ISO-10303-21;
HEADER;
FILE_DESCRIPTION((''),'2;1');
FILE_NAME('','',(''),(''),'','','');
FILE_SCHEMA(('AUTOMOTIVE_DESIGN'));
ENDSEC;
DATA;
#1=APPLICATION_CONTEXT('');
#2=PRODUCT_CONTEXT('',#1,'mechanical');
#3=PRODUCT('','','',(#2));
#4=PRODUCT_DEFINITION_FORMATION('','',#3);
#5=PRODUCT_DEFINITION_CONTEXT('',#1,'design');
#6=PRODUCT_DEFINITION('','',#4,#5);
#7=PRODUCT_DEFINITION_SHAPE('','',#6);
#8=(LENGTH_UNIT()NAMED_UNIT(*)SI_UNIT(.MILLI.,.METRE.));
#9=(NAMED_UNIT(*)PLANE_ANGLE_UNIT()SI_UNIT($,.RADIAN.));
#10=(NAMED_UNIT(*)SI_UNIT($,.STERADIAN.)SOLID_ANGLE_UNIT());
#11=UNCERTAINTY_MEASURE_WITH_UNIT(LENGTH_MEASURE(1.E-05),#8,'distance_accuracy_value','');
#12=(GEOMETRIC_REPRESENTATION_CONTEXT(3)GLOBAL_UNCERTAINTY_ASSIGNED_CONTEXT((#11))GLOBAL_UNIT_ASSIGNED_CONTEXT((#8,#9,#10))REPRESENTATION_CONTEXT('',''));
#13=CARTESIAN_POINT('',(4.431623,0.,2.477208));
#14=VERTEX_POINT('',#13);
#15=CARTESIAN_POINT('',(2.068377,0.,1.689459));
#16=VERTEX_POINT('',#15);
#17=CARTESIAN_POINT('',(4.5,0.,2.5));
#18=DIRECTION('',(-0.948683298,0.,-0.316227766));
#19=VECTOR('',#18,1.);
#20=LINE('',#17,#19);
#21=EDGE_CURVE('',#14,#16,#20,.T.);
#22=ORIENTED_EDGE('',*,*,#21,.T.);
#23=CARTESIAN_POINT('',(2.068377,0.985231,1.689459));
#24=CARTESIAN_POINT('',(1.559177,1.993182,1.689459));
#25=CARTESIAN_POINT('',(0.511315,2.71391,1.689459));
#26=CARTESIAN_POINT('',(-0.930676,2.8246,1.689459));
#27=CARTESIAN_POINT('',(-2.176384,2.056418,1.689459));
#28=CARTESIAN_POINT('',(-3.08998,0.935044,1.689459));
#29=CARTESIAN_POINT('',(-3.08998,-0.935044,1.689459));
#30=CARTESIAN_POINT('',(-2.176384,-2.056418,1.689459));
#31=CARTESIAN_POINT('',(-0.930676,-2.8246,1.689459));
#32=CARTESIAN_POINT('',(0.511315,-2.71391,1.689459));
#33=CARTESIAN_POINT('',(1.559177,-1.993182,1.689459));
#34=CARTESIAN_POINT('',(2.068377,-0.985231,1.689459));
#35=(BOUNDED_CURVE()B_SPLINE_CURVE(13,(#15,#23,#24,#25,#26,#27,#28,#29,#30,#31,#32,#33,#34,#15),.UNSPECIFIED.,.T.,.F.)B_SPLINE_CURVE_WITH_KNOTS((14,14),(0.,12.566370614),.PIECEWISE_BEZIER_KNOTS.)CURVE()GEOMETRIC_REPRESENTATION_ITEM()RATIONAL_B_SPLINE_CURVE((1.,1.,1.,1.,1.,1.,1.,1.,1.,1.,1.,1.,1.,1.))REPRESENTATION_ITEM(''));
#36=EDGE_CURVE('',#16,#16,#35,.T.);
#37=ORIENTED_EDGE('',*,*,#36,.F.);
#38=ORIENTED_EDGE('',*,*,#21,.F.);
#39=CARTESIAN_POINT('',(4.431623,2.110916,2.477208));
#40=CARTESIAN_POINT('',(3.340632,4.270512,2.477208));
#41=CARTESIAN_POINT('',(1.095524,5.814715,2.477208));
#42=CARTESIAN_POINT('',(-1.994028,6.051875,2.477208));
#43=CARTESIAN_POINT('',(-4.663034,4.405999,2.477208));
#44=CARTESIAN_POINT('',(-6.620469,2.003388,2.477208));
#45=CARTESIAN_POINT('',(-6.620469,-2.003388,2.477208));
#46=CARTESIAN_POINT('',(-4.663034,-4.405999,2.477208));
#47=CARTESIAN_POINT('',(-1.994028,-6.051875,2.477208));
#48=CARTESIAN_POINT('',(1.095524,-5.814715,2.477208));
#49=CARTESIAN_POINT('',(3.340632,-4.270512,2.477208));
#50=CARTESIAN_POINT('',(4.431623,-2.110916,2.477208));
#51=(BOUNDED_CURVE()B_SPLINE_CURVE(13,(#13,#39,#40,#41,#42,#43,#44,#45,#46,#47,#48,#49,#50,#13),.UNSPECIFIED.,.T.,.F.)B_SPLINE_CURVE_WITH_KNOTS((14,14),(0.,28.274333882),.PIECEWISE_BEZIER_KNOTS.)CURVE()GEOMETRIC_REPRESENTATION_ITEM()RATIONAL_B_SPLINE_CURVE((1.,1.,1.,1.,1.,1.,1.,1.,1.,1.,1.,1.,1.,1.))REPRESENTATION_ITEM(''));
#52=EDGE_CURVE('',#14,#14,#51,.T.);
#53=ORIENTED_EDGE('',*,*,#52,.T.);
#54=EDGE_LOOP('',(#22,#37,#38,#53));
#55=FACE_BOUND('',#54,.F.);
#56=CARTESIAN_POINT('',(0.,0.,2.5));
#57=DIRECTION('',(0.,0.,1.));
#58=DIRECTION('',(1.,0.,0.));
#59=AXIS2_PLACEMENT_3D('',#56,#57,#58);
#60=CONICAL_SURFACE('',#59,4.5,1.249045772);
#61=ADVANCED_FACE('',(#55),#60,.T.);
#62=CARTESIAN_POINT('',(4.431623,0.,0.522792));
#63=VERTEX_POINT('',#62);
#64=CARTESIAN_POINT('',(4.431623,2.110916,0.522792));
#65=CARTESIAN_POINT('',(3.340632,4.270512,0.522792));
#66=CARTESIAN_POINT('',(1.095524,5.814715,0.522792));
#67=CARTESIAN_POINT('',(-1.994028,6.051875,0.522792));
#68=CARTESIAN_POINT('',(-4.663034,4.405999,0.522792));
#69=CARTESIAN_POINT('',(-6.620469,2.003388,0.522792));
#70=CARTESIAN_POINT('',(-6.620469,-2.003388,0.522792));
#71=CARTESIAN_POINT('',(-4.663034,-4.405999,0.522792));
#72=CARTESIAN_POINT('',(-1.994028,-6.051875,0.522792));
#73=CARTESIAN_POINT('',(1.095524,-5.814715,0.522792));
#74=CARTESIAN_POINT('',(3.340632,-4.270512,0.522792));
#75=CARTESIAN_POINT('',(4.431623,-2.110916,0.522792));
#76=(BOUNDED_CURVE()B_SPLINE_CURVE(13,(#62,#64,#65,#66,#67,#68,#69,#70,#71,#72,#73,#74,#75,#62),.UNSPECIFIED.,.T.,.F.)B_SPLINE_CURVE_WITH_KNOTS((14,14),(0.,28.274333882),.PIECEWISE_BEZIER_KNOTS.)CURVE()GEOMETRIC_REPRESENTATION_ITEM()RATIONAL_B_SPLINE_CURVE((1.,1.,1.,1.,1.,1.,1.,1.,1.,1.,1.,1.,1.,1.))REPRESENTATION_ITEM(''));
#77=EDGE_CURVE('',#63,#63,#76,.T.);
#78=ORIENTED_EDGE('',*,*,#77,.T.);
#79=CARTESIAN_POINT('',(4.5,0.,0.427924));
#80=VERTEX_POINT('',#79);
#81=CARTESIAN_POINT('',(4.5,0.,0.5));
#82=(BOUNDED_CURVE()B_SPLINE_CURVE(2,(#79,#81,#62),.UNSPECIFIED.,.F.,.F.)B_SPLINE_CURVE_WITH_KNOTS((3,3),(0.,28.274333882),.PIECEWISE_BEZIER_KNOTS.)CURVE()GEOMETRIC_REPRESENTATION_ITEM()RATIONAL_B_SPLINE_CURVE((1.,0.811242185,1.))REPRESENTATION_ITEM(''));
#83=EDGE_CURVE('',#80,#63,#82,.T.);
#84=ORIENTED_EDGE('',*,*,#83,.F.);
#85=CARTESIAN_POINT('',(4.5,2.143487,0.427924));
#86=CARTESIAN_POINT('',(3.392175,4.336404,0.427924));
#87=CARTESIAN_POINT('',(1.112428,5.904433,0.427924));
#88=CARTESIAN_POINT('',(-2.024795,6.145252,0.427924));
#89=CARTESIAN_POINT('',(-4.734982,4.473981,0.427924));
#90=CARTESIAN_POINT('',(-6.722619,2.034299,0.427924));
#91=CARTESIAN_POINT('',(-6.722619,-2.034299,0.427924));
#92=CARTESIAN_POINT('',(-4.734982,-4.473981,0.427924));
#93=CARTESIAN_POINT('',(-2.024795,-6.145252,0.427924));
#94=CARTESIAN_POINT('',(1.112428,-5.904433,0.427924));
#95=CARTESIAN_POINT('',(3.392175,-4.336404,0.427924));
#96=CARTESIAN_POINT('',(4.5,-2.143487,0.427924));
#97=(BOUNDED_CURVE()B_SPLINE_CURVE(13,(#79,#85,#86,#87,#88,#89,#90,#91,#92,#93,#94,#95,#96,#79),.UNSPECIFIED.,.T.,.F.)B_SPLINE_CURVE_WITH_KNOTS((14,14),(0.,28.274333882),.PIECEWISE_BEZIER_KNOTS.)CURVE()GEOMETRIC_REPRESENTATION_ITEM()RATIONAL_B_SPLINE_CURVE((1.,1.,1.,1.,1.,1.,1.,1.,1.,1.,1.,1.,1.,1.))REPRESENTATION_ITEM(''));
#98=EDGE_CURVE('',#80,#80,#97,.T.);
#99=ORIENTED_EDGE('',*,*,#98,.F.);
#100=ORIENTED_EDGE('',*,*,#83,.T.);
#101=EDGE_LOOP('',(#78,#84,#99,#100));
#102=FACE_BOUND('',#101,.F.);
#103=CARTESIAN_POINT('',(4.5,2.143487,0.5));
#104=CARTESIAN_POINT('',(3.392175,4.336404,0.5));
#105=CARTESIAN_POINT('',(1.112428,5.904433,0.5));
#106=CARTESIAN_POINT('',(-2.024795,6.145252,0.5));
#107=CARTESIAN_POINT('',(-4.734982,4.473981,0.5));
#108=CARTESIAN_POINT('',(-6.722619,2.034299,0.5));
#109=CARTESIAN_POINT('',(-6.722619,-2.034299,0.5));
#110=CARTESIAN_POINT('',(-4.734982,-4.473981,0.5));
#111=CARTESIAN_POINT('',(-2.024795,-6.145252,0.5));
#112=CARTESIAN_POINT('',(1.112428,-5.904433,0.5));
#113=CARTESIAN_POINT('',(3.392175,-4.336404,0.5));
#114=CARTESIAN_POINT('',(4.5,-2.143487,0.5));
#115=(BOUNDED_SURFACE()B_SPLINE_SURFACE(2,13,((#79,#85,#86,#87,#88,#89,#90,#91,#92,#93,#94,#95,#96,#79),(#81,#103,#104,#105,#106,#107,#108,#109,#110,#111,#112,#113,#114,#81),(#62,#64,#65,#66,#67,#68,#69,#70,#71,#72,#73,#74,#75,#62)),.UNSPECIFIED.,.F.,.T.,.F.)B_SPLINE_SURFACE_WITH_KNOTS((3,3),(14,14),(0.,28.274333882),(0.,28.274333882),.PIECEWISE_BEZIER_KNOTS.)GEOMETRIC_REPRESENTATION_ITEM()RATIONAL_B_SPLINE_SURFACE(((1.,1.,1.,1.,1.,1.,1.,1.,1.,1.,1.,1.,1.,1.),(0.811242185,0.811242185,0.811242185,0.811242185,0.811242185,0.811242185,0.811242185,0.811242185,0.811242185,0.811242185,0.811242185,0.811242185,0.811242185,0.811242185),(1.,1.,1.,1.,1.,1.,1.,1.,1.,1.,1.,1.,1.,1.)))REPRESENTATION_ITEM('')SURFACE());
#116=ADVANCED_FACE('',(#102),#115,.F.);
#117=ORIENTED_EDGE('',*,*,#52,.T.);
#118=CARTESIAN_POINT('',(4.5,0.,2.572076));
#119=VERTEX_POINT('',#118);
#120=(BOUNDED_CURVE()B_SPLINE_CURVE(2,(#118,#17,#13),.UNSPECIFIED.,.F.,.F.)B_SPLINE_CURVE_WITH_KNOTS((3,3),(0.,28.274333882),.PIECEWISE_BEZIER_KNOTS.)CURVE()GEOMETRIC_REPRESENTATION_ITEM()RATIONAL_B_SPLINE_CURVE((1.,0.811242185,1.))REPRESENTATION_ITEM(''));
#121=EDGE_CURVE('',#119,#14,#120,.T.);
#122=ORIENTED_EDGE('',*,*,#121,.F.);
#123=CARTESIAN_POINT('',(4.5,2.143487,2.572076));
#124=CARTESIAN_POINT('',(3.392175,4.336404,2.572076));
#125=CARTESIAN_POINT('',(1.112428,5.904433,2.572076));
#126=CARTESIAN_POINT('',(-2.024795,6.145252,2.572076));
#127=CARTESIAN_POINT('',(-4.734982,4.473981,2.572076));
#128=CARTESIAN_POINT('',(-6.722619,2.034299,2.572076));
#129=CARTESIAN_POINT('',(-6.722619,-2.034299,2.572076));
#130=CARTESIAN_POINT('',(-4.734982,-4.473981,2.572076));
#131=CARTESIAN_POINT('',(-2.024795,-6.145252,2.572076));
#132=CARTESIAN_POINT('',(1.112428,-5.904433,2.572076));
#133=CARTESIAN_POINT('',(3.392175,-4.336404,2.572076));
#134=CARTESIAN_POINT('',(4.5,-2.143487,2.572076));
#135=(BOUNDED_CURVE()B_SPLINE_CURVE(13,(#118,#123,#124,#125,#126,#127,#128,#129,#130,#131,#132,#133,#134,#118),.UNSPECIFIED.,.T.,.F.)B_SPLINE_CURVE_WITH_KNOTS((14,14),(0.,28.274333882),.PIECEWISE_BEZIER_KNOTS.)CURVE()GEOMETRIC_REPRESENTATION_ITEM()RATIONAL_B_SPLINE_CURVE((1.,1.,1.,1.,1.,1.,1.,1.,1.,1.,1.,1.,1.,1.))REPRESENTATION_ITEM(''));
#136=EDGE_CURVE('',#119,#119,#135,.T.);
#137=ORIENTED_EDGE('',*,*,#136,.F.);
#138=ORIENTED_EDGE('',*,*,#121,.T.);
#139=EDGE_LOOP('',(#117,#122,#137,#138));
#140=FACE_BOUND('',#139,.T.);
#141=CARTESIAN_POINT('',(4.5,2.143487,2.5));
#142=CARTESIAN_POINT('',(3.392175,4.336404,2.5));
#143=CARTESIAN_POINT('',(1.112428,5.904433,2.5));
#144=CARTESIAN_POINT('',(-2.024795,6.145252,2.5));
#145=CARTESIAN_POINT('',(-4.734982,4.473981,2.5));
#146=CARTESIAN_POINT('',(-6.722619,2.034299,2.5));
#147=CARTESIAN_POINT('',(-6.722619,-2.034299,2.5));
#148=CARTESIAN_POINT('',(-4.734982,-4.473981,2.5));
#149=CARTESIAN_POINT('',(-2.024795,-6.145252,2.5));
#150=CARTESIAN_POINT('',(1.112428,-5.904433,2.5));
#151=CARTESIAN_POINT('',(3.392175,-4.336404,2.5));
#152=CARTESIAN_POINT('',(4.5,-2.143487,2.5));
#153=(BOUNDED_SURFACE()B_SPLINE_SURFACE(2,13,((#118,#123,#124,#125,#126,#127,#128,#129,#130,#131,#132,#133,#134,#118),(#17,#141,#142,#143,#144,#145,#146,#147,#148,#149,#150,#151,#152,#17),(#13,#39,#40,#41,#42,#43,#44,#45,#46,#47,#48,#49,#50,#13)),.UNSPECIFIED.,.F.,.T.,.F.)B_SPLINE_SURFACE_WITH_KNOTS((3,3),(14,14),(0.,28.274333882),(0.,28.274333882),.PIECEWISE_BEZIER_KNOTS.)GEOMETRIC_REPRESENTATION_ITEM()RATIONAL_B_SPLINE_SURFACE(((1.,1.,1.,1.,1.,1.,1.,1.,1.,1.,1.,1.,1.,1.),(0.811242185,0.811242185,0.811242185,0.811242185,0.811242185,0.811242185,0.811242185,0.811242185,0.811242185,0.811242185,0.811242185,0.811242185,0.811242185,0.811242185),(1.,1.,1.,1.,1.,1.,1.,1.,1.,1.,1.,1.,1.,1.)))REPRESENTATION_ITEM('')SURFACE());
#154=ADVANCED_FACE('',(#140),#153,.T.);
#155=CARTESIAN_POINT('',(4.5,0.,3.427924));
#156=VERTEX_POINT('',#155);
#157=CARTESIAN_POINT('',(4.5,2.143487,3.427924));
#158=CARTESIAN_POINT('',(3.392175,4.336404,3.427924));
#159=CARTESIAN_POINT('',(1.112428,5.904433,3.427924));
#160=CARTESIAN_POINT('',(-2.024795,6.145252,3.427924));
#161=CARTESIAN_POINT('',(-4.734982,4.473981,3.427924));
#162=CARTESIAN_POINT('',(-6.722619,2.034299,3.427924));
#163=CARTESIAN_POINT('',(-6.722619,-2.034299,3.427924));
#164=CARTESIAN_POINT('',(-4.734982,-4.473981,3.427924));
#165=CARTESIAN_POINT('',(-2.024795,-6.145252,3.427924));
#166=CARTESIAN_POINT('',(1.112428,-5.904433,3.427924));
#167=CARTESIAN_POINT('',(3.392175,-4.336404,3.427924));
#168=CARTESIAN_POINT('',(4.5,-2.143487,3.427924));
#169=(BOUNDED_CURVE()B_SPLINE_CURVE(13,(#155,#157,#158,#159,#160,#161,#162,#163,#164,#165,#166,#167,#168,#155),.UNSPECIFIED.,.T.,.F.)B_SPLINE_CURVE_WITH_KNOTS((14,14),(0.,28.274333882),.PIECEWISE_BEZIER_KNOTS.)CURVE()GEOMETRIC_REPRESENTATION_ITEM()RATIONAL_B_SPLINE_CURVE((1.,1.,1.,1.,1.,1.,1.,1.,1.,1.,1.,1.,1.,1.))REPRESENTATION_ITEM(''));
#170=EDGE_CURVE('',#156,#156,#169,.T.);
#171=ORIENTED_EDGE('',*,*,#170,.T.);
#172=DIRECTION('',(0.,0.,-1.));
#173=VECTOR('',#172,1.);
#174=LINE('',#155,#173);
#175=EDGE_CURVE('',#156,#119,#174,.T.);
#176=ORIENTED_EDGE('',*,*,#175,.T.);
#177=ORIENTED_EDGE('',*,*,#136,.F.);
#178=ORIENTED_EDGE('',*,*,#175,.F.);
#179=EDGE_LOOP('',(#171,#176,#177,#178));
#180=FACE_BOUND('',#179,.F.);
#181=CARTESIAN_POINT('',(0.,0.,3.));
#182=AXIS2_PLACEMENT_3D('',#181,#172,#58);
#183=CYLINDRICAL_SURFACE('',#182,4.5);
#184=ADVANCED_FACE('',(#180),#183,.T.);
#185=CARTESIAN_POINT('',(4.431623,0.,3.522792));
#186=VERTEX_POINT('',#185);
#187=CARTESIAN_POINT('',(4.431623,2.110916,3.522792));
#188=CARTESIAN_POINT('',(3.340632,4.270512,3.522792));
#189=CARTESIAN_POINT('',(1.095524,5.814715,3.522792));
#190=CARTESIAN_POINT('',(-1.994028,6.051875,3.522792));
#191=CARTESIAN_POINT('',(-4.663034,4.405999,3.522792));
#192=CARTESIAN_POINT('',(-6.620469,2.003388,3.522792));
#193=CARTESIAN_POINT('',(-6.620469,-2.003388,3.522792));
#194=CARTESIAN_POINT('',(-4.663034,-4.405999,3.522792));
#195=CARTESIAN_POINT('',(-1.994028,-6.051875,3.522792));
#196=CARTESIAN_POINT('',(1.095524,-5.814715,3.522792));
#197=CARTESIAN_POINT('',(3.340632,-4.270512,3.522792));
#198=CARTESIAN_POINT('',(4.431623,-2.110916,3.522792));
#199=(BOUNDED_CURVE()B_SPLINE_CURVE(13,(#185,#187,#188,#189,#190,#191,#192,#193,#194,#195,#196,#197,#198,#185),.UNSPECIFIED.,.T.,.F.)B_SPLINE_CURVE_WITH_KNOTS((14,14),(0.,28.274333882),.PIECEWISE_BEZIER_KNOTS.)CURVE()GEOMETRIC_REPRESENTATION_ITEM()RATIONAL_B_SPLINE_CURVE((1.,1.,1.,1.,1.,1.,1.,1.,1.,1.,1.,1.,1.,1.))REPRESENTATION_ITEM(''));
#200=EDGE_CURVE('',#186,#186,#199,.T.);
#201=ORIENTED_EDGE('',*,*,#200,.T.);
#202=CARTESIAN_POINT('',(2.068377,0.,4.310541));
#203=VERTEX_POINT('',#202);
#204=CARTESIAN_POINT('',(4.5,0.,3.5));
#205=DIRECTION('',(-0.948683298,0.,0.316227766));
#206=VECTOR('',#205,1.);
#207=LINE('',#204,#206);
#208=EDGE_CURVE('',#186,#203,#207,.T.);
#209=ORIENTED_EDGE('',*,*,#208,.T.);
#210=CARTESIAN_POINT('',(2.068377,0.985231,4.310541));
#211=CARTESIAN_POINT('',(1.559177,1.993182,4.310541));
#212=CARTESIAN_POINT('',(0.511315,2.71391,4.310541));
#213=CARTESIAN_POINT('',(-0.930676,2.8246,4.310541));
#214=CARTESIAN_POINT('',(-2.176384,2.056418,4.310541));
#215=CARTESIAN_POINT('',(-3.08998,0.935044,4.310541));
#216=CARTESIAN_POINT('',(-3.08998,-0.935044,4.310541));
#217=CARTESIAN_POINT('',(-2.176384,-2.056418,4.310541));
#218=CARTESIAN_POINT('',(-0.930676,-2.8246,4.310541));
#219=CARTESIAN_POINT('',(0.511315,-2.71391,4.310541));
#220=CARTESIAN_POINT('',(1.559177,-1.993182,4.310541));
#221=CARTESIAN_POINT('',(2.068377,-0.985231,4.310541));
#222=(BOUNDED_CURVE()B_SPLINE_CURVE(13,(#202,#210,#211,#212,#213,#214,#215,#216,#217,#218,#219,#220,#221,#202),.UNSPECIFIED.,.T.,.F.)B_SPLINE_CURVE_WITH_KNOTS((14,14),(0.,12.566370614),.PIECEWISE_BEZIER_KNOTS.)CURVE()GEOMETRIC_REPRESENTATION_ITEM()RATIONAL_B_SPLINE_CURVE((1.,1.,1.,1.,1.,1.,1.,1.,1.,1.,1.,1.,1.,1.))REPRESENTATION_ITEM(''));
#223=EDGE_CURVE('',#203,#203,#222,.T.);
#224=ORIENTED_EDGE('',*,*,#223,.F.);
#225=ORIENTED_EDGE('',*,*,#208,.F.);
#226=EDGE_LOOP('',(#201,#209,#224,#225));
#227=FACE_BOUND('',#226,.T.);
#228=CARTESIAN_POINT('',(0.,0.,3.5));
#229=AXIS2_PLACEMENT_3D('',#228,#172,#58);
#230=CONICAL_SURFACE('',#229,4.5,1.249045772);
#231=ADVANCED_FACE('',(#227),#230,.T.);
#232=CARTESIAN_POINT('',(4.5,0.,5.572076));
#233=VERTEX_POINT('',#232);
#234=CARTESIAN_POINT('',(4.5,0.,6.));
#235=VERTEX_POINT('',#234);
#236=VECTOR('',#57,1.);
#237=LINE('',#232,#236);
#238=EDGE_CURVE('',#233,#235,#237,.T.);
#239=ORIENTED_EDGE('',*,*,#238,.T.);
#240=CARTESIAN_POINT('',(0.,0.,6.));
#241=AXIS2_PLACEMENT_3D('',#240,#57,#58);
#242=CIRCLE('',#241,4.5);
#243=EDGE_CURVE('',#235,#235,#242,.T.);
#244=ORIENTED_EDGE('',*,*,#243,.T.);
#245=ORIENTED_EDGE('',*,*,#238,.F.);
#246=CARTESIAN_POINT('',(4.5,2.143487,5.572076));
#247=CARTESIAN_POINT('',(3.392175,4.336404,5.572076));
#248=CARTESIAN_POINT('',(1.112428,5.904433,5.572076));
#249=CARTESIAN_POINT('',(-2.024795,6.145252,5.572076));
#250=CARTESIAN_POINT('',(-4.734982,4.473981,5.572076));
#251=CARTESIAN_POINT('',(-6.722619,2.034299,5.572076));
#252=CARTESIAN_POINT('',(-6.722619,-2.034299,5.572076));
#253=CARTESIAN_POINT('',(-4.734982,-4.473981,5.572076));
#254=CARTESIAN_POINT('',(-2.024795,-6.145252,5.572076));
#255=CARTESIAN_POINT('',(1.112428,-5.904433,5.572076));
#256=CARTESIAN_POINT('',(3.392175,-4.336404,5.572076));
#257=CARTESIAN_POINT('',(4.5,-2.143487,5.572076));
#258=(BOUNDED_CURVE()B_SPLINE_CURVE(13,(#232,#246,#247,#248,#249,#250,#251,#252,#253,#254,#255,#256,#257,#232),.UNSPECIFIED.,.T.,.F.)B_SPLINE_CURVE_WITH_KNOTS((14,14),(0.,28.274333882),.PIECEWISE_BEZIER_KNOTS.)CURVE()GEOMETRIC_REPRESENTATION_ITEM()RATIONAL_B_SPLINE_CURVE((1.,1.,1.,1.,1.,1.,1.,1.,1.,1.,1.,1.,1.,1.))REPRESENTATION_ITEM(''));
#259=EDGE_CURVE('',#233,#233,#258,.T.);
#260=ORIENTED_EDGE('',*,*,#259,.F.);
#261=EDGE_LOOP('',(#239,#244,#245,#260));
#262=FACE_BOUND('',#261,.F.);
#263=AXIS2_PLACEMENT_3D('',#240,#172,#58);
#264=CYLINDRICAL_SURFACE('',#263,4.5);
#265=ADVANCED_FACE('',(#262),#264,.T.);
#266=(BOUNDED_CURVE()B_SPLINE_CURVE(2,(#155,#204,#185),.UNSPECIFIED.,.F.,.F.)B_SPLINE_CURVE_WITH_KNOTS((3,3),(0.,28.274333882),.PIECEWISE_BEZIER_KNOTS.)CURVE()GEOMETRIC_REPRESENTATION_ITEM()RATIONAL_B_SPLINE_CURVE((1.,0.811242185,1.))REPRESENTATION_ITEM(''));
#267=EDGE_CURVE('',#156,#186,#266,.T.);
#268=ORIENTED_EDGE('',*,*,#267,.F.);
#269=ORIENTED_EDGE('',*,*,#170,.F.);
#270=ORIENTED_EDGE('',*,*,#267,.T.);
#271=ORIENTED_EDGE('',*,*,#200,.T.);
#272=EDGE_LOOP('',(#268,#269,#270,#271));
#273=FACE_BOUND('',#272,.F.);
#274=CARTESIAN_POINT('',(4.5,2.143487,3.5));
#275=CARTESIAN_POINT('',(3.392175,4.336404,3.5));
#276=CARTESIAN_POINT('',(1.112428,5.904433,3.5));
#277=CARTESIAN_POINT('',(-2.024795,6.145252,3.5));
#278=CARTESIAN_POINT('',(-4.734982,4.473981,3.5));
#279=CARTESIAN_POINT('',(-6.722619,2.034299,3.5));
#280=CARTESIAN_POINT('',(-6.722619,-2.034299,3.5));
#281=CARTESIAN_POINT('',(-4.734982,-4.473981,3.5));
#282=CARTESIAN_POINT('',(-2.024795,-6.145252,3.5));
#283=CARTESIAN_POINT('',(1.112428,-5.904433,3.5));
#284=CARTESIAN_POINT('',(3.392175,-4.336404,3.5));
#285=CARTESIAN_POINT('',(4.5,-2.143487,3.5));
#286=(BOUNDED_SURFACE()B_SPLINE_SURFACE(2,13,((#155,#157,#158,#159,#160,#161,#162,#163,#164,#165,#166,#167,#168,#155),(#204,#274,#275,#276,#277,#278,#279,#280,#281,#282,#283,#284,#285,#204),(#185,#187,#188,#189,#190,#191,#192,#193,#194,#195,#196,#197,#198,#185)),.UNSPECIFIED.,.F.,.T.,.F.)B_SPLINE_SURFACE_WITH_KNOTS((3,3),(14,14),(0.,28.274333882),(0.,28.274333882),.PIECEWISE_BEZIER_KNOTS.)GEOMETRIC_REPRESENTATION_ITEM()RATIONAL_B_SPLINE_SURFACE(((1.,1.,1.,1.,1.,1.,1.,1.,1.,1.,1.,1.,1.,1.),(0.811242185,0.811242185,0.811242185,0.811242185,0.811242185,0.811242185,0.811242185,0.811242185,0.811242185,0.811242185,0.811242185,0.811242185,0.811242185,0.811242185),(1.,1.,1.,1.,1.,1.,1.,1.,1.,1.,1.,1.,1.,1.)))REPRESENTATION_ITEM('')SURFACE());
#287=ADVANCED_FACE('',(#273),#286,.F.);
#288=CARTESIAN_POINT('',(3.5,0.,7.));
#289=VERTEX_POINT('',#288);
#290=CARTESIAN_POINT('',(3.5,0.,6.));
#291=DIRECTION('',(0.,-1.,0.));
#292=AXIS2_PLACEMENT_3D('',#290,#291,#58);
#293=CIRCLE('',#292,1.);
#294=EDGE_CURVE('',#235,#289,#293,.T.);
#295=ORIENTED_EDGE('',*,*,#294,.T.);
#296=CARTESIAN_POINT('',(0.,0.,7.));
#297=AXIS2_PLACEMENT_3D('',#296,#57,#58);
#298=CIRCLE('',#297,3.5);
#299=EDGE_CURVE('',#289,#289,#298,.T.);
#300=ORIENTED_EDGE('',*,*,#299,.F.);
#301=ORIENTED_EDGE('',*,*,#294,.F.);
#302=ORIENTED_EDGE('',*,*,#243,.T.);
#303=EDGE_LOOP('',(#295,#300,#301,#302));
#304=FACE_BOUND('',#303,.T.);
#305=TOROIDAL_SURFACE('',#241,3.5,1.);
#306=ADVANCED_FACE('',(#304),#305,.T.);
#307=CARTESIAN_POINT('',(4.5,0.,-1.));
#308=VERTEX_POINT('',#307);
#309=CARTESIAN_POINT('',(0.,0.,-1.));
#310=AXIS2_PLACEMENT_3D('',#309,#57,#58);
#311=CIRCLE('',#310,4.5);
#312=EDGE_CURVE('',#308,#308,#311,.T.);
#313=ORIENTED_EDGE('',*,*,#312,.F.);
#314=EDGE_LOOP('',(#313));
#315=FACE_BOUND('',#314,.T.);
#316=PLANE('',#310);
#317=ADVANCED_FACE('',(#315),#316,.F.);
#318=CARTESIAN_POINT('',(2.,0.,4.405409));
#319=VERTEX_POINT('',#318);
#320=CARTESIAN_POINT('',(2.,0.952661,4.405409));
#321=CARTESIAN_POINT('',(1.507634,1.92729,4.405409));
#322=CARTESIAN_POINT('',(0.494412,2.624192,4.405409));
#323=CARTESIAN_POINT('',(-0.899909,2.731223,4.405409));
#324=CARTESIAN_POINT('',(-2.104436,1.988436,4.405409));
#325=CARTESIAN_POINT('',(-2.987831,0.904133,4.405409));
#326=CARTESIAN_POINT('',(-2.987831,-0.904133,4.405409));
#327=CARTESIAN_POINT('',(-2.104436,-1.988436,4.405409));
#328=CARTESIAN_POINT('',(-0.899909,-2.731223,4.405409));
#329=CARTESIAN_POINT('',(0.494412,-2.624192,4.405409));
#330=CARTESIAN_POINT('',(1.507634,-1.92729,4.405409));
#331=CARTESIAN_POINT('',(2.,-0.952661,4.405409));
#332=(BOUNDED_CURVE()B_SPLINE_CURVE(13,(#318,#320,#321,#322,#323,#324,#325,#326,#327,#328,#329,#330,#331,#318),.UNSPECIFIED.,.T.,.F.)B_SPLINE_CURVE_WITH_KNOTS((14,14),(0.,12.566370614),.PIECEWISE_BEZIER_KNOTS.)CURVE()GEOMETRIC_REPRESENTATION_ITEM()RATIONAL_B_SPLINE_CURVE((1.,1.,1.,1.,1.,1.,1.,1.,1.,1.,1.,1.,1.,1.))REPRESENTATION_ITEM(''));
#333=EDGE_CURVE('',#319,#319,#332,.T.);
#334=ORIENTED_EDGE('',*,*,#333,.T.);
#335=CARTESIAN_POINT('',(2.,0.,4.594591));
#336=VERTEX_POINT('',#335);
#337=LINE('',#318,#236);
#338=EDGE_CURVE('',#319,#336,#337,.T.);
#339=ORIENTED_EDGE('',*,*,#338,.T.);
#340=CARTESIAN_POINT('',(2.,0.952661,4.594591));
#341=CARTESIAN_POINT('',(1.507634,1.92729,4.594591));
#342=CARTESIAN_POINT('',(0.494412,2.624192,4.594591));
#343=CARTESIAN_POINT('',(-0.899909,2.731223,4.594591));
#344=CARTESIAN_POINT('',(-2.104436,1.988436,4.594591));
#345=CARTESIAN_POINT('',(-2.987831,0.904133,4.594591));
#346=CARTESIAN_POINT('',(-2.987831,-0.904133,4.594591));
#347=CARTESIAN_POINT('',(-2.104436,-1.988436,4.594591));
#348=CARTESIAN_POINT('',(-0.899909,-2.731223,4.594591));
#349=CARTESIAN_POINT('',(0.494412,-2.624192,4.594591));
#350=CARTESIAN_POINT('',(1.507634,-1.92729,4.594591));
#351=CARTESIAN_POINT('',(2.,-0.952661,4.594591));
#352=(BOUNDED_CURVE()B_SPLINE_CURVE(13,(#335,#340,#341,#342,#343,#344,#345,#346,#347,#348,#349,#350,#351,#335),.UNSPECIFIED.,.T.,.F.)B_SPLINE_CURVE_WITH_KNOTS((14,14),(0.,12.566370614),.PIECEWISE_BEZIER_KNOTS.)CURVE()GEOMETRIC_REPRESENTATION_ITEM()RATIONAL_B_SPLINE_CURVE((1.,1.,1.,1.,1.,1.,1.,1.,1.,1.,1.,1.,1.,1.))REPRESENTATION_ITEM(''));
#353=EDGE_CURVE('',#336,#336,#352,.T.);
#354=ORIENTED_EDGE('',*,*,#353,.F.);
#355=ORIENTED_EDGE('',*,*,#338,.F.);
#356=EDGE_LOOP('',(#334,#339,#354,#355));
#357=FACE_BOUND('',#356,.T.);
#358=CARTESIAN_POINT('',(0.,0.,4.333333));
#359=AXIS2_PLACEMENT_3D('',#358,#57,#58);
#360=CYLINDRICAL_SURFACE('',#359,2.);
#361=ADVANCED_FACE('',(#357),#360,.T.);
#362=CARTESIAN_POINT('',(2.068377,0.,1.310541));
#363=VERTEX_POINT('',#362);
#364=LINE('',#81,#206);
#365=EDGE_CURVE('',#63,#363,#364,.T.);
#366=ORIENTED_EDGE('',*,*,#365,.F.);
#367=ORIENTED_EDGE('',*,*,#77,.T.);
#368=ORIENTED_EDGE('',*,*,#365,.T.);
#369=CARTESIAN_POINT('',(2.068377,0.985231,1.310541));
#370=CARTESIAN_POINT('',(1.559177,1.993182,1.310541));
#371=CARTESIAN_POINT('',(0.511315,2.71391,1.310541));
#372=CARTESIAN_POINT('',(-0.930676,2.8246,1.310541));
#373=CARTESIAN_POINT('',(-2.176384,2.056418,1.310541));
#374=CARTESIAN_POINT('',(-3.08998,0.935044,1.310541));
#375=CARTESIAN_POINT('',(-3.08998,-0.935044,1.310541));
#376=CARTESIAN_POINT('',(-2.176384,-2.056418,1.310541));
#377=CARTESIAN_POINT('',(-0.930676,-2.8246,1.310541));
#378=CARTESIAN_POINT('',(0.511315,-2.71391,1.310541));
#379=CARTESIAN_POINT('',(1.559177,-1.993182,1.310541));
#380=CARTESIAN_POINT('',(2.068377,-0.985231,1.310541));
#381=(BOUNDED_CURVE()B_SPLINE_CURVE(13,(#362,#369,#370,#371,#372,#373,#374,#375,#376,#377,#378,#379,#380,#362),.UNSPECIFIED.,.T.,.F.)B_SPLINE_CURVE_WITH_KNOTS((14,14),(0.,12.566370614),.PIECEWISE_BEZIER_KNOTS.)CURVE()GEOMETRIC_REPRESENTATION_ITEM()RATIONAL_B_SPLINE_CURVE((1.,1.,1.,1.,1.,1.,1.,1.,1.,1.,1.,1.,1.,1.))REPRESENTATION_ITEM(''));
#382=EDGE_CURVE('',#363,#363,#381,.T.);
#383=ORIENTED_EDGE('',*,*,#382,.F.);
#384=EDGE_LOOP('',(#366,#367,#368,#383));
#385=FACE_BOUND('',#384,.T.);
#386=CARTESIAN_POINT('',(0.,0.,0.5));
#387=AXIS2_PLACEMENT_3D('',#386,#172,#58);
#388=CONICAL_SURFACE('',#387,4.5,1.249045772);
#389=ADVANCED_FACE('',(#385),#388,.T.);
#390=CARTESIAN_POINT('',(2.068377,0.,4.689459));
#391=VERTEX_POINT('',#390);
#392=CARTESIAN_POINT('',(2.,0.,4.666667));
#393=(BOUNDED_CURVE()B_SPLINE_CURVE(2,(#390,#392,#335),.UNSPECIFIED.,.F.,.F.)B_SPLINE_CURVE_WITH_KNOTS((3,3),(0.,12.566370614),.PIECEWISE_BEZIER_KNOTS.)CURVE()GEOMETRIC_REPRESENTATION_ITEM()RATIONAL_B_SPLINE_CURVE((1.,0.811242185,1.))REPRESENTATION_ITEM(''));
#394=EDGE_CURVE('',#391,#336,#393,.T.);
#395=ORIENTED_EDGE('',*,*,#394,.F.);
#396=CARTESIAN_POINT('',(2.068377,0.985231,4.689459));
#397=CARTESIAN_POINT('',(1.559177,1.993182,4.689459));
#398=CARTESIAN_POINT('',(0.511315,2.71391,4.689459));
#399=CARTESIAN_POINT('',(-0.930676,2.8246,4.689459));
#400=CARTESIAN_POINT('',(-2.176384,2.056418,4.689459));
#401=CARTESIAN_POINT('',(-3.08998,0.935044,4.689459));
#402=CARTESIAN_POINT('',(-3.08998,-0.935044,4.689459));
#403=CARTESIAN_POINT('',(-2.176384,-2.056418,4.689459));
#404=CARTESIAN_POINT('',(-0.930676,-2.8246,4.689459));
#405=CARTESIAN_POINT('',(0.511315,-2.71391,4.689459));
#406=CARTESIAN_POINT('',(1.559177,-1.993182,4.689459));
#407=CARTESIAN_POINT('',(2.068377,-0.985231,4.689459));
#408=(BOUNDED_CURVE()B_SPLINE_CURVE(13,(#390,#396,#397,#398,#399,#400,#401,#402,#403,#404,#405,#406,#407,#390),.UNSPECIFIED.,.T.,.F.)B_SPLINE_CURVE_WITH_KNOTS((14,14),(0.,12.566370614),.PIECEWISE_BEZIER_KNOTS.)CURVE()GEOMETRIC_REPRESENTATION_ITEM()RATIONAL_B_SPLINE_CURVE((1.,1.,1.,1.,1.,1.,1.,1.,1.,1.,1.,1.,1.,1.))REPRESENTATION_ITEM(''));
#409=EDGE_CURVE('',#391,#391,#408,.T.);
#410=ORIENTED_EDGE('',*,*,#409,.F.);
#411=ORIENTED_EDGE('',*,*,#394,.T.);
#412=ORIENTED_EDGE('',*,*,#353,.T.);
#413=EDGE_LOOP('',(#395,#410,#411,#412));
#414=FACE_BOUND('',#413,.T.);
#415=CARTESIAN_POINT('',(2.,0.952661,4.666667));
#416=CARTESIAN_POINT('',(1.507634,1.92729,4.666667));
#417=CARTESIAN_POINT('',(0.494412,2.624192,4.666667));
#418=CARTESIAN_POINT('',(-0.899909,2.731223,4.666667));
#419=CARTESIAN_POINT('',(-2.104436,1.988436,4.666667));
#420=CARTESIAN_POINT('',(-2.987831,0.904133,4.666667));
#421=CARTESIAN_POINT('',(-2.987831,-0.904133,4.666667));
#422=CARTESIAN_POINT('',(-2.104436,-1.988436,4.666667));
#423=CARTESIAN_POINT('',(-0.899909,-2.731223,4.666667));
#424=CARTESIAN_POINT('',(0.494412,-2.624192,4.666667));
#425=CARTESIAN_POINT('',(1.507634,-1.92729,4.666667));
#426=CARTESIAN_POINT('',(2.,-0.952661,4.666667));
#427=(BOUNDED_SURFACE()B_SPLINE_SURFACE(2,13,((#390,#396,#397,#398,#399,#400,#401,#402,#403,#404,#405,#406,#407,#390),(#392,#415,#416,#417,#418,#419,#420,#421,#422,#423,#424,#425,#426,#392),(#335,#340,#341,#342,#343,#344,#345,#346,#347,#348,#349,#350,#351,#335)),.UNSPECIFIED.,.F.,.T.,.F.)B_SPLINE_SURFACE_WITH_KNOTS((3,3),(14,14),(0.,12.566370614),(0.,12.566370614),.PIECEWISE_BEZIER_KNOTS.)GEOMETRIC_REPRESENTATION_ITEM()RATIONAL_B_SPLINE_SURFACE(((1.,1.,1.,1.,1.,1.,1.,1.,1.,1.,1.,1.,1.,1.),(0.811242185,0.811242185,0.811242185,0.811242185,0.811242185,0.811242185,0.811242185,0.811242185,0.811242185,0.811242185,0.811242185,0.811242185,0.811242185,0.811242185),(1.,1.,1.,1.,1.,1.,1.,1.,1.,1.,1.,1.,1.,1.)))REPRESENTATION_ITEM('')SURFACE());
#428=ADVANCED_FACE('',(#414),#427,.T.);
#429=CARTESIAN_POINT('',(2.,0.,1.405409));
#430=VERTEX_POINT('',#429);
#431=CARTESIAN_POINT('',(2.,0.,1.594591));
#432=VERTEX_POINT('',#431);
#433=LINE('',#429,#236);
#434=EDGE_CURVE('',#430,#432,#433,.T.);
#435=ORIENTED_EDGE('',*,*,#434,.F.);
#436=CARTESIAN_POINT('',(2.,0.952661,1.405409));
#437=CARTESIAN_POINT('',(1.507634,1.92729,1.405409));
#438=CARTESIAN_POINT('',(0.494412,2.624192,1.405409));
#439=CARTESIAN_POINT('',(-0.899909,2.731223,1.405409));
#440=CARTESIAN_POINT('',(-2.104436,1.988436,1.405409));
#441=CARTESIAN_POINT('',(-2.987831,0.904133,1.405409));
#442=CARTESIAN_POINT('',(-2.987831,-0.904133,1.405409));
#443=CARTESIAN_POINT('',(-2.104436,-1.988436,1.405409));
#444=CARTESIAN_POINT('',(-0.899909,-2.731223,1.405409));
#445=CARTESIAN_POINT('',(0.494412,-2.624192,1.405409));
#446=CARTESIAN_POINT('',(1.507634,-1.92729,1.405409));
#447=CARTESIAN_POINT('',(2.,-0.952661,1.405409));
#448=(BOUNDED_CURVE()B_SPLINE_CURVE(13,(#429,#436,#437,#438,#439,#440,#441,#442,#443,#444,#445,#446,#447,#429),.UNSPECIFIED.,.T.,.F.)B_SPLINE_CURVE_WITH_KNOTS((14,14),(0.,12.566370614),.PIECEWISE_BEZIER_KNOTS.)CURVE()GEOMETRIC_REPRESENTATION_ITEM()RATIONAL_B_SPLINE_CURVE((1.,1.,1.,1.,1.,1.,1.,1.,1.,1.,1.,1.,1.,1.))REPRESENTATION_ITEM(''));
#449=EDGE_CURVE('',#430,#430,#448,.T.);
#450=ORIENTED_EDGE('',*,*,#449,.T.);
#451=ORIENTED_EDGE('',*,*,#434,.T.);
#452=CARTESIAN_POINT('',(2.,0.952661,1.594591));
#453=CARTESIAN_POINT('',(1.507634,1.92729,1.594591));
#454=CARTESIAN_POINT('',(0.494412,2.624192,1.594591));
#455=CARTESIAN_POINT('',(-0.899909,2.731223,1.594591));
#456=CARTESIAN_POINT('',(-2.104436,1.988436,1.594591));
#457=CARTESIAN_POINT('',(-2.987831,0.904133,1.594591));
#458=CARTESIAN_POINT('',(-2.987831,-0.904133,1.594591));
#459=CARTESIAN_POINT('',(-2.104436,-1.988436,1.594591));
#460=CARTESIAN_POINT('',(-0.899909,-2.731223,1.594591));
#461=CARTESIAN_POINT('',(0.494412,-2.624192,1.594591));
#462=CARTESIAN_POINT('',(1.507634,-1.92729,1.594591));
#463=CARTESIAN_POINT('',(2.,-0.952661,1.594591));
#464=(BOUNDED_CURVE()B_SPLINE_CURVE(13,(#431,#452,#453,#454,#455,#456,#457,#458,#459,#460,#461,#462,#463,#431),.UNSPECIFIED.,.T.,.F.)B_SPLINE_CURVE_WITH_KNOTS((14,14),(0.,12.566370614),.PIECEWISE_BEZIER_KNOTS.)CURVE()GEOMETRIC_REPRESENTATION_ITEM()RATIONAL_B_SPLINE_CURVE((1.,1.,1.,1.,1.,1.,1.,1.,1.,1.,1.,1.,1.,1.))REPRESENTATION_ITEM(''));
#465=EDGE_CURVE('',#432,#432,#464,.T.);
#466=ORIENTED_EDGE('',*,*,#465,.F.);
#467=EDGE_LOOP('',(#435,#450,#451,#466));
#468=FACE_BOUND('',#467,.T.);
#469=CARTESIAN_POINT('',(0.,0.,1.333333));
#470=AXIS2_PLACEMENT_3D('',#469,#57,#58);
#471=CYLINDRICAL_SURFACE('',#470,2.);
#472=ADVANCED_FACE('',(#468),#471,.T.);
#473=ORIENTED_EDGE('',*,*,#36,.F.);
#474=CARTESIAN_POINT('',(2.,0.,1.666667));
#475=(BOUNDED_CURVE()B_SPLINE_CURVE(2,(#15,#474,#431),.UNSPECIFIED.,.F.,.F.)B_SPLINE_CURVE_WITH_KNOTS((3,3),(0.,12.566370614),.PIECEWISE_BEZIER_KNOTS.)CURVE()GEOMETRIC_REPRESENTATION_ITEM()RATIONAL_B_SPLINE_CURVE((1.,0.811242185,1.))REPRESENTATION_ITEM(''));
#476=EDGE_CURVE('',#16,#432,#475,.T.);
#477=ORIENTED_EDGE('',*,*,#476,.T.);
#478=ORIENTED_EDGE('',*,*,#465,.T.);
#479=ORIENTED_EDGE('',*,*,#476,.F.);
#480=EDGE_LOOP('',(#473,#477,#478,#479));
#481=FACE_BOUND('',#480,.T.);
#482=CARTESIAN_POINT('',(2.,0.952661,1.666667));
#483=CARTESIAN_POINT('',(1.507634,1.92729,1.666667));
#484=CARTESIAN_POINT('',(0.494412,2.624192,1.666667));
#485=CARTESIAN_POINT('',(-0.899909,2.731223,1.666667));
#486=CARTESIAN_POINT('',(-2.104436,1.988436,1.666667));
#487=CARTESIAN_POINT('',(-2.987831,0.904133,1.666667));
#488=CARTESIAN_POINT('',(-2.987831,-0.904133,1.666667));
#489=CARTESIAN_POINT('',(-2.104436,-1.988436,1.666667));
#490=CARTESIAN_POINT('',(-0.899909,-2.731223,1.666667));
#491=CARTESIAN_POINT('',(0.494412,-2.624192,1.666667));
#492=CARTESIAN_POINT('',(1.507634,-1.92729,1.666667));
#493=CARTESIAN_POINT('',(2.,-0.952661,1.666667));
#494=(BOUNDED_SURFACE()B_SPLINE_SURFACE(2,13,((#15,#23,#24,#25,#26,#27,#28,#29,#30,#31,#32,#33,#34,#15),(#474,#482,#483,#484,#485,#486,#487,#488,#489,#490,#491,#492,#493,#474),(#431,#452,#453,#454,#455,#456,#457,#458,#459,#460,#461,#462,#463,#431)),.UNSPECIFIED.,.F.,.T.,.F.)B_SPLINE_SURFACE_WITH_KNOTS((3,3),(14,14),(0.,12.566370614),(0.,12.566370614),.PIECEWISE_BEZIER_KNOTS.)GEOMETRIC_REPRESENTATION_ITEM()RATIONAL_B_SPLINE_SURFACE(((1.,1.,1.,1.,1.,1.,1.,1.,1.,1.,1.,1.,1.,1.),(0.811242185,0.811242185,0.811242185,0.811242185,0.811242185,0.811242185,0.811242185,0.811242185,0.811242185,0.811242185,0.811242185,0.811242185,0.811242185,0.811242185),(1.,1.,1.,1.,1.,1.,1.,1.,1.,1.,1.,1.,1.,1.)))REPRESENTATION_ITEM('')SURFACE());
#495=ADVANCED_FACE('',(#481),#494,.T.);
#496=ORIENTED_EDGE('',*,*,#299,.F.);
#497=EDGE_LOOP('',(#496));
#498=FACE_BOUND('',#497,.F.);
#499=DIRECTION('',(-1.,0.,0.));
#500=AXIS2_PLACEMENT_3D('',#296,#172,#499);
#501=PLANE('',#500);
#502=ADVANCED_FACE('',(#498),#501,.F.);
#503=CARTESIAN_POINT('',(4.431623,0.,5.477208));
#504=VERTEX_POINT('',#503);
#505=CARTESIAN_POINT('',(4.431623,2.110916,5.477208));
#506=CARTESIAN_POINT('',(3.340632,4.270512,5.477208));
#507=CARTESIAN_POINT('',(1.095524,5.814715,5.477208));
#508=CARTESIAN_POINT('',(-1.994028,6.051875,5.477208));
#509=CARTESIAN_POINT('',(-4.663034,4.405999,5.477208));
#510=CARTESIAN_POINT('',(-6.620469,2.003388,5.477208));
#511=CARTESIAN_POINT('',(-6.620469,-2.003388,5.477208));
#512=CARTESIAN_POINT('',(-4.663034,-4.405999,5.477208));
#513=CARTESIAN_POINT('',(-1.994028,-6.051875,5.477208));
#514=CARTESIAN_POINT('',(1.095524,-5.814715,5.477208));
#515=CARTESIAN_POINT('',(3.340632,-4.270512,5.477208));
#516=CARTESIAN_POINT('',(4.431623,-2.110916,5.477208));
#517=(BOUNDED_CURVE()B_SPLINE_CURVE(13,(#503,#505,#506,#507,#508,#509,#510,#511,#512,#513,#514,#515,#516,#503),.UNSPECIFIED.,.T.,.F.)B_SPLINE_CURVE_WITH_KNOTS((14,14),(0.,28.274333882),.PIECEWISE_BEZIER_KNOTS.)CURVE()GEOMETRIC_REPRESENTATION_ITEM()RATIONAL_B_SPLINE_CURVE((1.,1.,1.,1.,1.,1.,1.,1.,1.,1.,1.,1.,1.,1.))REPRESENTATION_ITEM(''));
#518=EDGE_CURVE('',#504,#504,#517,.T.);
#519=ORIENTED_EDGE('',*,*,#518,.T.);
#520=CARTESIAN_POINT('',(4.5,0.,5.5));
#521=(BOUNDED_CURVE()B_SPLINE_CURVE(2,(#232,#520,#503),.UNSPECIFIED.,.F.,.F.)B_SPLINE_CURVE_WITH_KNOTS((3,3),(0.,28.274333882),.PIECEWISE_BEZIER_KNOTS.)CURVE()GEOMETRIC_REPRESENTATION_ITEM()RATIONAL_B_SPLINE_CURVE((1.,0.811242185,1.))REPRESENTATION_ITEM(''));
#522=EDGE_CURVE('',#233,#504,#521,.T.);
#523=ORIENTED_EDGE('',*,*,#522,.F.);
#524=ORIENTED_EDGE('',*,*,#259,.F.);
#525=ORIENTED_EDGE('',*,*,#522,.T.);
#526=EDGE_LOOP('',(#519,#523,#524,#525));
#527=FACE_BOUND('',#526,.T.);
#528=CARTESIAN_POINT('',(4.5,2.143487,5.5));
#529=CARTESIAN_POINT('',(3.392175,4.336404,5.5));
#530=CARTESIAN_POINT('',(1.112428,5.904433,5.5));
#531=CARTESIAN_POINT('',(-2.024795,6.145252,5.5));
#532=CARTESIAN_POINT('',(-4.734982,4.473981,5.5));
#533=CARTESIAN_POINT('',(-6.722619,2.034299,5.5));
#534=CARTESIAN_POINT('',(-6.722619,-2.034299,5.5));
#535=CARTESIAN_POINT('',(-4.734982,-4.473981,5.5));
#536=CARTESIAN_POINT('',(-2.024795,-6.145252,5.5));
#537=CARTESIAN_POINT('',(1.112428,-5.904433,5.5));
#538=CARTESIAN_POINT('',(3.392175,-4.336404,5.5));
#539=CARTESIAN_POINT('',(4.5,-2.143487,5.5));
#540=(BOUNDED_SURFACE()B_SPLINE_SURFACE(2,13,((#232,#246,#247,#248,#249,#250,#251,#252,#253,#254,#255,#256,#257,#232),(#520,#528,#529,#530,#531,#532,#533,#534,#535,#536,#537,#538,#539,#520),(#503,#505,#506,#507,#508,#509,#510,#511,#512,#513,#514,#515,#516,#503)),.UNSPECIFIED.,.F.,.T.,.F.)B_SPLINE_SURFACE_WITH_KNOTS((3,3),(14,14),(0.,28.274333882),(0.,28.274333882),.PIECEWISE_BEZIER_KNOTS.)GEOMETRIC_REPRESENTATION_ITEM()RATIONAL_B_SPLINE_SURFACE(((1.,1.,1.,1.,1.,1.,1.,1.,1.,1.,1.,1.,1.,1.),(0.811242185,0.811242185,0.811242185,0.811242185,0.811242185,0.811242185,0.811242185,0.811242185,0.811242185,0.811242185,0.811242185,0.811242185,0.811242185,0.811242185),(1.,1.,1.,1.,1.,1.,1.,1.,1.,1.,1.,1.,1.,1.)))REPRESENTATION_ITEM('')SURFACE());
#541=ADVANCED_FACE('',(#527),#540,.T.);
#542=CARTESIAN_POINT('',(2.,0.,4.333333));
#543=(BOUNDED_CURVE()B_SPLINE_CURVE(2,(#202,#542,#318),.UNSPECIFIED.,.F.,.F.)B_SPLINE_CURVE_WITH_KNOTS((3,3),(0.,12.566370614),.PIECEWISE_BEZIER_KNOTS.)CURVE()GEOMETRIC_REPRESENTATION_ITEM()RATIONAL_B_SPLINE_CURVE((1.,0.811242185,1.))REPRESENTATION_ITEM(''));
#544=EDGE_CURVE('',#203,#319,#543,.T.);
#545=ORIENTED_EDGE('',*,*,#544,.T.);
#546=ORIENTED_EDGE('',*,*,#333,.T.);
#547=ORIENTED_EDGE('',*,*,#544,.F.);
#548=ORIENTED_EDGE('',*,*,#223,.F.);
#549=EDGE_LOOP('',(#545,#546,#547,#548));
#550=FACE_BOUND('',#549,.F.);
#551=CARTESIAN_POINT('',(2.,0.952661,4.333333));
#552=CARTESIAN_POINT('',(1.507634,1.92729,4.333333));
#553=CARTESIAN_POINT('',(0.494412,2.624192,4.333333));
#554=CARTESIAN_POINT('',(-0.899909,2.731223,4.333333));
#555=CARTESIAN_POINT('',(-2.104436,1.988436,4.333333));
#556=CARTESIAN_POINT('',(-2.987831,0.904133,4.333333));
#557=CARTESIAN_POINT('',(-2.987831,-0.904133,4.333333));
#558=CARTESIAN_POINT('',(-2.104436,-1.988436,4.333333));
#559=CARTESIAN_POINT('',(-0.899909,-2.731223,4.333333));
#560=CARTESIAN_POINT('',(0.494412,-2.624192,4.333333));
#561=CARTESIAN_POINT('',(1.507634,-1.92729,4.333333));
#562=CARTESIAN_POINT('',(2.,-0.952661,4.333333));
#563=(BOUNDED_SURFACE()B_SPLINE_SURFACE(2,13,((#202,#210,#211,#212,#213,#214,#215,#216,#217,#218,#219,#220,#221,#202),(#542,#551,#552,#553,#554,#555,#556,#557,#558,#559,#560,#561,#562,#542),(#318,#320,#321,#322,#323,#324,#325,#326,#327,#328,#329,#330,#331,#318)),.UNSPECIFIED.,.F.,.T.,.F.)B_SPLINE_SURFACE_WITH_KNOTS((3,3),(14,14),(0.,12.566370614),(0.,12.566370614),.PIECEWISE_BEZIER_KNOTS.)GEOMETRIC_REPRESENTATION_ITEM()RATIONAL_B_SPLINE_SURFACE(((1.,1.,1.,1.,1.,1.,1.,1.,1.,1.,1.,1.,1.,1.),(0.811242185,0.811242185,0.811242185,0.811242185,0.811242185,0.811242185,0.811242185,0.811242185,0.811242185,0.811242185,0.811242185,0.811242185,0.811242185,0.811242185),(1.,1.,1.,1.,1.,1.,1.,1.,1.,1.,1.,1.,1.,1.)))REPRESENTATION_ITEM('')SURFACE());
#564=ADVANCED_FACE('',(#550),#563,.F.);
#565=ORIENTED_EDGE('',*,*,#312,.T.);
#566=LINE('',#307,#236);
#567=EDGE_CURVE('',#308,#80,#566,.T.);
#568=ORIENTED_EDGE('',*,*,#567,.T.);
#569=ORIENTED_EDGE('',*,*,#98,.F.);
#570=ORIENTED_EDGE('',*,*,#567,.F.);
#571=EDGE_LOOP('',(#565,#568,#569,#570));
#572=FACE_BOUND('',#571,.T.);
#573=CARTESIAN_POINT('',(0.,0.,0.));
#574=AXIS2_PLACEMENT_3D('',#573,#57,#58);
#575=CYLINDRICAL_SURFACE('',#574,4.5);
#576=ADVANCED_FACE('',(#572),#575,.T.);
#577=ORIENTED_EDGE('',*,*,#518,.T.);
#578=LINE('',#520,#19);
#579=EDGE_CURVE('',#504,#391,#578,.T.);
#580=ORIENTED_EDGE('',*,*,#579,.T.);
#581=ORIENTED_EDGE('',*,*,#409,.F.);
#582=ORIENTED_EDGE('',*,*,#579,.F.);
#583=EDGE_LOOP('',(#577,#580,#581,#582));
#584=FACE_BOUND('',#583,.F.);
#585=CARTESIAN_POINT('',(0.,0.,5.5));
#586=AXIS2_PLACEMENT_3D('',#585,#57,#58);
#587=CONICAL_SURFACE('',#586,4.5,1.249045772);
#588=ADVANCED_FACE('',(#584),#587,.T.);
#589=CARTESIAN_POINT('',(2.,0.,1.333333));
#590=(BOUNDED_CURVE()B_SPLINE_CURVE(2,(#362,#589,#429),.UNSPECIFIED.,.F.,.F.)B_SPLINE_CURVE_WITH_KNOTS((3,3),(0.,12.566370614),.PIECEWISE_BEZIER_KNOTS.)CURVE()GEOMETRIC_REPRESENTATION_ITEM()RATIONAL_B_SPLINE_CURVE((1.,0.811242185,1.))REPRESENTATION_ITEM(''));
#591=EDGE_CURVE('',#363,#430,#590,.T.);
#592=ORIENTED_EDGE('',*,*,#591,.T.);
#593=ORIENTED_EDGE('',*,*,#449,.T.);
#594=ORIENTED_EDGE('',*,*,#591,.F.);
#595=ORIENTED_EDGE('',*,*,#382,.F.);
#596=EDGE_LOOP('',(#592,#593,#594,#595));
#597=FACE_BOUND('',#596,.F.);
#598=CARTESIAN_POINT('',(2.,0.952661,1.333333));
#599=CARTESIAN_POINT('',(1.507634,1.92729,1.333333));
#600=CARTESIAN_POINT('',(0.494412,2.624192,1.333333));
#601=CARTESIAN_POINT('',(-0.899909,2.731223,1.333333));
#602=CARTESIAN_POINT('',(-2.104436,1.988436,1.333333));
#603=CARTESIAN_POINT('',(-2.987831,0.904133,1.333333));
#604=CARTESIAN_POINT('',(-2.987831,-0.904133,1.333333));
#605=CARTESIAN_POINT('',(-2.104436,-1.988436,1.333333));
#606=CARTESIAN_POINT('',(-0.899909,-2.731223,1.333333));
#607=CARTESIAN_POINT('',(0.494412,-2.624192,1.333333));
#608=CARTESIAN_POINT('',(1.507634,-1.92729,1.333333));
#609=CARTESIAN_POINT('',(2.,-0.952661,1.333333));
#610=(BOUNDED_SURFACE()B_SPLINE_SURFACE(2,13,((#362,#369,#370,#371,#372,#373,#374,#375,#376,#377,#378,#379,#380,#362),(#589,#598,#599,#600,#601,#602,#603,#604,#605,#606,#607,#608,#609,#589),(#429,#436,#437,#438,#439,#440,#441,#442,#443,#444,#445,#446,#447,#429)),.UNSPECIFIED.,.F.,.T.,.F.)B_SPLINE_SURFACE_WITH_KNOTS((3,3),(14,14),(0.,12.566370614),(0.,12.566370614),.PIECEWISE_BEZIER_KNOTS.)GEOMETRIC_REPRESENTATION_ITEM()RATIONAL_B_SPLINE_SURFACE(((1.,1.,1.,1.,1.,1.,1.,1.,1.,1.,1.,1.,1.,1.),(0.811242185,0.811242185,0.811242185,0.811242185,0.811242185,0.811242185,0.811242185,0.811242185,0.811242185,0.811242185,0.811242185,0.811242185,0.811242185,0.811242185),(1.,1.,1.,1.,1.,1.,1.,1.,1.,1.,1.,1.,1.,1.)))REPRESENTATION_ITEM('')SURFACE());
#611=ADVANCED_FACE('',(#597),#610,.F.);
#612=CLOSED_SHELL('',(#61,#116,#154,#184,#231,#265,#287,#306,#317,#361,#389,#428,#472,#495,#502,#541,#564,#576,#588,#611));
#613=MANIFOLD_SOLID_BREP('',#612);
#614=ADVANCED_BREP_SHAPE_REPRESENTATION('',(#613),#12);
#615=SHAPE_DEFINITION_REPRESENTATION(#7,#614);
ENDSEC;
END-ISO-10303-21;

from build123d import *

# Parameters (mm, degrees)
F2_R     = 0.1
F5_DEPTH = 1
F6_DEPTH = 1
F7_R     = 1


with BuildPart() as f1:
    # F0 (on Front) → F1 (revolve)
    with BuildSketch(Plane.XZ):
        Polygon((0, 1.5), (0, 0), (4.5, 0), (4.5, 0.5), (2, 1.3333333333), (1.5, 1.5), align=None)
        Polygon((2, 1.5), (1.5, 1.5), (2, 1.3333333333), align=None)
    revolve(axis=Axis((0, 0, 0.75), (0, 0, 1)))

    # F2
    f2_edges = [f1.edges().sort_by_distance(p)[0] for p in [
        (-2, 0, 1.333333),
        (-4.5, 0, 0.5),
    ]]
    fillet(f2_edges, radius=F2_R)

    # F3: F1 across face


with BuildPart() as f1_1:
    add(f1.part)
    add(f1.part.mirror(Plane.XY.offset(1.5)))

    # F4: F1 across face


with BuildPart() as f1_2:
    add(f1_1.part)
    add(f1_1.part.mirror(Plane.XY.offset(3)))

    # F5 (add): a face of the model
    f5_faces = [f1_2.faces().sort_by_distance(p)[0] for p in [
        (0, 0, 6),
    ]]
    extrude(f5_faces, amount=F5_DEPTH)

    # F6 (add): a face of the model
    f6_faces = [f1_2.faces().sort_by_distance(p)[0] for p in [
        (0, 0, 0),
    ]]
    extrude(f6_faces, amount=F6_DEPTH)

    # F7
    f7_edges = [f1_2.edges().sort_by_distance(p)[0] for p in [
        (-4.5, 0, 7),
    ]]
    fillet(f7_edges, radius=F7_R)


solid = f1_2.part
